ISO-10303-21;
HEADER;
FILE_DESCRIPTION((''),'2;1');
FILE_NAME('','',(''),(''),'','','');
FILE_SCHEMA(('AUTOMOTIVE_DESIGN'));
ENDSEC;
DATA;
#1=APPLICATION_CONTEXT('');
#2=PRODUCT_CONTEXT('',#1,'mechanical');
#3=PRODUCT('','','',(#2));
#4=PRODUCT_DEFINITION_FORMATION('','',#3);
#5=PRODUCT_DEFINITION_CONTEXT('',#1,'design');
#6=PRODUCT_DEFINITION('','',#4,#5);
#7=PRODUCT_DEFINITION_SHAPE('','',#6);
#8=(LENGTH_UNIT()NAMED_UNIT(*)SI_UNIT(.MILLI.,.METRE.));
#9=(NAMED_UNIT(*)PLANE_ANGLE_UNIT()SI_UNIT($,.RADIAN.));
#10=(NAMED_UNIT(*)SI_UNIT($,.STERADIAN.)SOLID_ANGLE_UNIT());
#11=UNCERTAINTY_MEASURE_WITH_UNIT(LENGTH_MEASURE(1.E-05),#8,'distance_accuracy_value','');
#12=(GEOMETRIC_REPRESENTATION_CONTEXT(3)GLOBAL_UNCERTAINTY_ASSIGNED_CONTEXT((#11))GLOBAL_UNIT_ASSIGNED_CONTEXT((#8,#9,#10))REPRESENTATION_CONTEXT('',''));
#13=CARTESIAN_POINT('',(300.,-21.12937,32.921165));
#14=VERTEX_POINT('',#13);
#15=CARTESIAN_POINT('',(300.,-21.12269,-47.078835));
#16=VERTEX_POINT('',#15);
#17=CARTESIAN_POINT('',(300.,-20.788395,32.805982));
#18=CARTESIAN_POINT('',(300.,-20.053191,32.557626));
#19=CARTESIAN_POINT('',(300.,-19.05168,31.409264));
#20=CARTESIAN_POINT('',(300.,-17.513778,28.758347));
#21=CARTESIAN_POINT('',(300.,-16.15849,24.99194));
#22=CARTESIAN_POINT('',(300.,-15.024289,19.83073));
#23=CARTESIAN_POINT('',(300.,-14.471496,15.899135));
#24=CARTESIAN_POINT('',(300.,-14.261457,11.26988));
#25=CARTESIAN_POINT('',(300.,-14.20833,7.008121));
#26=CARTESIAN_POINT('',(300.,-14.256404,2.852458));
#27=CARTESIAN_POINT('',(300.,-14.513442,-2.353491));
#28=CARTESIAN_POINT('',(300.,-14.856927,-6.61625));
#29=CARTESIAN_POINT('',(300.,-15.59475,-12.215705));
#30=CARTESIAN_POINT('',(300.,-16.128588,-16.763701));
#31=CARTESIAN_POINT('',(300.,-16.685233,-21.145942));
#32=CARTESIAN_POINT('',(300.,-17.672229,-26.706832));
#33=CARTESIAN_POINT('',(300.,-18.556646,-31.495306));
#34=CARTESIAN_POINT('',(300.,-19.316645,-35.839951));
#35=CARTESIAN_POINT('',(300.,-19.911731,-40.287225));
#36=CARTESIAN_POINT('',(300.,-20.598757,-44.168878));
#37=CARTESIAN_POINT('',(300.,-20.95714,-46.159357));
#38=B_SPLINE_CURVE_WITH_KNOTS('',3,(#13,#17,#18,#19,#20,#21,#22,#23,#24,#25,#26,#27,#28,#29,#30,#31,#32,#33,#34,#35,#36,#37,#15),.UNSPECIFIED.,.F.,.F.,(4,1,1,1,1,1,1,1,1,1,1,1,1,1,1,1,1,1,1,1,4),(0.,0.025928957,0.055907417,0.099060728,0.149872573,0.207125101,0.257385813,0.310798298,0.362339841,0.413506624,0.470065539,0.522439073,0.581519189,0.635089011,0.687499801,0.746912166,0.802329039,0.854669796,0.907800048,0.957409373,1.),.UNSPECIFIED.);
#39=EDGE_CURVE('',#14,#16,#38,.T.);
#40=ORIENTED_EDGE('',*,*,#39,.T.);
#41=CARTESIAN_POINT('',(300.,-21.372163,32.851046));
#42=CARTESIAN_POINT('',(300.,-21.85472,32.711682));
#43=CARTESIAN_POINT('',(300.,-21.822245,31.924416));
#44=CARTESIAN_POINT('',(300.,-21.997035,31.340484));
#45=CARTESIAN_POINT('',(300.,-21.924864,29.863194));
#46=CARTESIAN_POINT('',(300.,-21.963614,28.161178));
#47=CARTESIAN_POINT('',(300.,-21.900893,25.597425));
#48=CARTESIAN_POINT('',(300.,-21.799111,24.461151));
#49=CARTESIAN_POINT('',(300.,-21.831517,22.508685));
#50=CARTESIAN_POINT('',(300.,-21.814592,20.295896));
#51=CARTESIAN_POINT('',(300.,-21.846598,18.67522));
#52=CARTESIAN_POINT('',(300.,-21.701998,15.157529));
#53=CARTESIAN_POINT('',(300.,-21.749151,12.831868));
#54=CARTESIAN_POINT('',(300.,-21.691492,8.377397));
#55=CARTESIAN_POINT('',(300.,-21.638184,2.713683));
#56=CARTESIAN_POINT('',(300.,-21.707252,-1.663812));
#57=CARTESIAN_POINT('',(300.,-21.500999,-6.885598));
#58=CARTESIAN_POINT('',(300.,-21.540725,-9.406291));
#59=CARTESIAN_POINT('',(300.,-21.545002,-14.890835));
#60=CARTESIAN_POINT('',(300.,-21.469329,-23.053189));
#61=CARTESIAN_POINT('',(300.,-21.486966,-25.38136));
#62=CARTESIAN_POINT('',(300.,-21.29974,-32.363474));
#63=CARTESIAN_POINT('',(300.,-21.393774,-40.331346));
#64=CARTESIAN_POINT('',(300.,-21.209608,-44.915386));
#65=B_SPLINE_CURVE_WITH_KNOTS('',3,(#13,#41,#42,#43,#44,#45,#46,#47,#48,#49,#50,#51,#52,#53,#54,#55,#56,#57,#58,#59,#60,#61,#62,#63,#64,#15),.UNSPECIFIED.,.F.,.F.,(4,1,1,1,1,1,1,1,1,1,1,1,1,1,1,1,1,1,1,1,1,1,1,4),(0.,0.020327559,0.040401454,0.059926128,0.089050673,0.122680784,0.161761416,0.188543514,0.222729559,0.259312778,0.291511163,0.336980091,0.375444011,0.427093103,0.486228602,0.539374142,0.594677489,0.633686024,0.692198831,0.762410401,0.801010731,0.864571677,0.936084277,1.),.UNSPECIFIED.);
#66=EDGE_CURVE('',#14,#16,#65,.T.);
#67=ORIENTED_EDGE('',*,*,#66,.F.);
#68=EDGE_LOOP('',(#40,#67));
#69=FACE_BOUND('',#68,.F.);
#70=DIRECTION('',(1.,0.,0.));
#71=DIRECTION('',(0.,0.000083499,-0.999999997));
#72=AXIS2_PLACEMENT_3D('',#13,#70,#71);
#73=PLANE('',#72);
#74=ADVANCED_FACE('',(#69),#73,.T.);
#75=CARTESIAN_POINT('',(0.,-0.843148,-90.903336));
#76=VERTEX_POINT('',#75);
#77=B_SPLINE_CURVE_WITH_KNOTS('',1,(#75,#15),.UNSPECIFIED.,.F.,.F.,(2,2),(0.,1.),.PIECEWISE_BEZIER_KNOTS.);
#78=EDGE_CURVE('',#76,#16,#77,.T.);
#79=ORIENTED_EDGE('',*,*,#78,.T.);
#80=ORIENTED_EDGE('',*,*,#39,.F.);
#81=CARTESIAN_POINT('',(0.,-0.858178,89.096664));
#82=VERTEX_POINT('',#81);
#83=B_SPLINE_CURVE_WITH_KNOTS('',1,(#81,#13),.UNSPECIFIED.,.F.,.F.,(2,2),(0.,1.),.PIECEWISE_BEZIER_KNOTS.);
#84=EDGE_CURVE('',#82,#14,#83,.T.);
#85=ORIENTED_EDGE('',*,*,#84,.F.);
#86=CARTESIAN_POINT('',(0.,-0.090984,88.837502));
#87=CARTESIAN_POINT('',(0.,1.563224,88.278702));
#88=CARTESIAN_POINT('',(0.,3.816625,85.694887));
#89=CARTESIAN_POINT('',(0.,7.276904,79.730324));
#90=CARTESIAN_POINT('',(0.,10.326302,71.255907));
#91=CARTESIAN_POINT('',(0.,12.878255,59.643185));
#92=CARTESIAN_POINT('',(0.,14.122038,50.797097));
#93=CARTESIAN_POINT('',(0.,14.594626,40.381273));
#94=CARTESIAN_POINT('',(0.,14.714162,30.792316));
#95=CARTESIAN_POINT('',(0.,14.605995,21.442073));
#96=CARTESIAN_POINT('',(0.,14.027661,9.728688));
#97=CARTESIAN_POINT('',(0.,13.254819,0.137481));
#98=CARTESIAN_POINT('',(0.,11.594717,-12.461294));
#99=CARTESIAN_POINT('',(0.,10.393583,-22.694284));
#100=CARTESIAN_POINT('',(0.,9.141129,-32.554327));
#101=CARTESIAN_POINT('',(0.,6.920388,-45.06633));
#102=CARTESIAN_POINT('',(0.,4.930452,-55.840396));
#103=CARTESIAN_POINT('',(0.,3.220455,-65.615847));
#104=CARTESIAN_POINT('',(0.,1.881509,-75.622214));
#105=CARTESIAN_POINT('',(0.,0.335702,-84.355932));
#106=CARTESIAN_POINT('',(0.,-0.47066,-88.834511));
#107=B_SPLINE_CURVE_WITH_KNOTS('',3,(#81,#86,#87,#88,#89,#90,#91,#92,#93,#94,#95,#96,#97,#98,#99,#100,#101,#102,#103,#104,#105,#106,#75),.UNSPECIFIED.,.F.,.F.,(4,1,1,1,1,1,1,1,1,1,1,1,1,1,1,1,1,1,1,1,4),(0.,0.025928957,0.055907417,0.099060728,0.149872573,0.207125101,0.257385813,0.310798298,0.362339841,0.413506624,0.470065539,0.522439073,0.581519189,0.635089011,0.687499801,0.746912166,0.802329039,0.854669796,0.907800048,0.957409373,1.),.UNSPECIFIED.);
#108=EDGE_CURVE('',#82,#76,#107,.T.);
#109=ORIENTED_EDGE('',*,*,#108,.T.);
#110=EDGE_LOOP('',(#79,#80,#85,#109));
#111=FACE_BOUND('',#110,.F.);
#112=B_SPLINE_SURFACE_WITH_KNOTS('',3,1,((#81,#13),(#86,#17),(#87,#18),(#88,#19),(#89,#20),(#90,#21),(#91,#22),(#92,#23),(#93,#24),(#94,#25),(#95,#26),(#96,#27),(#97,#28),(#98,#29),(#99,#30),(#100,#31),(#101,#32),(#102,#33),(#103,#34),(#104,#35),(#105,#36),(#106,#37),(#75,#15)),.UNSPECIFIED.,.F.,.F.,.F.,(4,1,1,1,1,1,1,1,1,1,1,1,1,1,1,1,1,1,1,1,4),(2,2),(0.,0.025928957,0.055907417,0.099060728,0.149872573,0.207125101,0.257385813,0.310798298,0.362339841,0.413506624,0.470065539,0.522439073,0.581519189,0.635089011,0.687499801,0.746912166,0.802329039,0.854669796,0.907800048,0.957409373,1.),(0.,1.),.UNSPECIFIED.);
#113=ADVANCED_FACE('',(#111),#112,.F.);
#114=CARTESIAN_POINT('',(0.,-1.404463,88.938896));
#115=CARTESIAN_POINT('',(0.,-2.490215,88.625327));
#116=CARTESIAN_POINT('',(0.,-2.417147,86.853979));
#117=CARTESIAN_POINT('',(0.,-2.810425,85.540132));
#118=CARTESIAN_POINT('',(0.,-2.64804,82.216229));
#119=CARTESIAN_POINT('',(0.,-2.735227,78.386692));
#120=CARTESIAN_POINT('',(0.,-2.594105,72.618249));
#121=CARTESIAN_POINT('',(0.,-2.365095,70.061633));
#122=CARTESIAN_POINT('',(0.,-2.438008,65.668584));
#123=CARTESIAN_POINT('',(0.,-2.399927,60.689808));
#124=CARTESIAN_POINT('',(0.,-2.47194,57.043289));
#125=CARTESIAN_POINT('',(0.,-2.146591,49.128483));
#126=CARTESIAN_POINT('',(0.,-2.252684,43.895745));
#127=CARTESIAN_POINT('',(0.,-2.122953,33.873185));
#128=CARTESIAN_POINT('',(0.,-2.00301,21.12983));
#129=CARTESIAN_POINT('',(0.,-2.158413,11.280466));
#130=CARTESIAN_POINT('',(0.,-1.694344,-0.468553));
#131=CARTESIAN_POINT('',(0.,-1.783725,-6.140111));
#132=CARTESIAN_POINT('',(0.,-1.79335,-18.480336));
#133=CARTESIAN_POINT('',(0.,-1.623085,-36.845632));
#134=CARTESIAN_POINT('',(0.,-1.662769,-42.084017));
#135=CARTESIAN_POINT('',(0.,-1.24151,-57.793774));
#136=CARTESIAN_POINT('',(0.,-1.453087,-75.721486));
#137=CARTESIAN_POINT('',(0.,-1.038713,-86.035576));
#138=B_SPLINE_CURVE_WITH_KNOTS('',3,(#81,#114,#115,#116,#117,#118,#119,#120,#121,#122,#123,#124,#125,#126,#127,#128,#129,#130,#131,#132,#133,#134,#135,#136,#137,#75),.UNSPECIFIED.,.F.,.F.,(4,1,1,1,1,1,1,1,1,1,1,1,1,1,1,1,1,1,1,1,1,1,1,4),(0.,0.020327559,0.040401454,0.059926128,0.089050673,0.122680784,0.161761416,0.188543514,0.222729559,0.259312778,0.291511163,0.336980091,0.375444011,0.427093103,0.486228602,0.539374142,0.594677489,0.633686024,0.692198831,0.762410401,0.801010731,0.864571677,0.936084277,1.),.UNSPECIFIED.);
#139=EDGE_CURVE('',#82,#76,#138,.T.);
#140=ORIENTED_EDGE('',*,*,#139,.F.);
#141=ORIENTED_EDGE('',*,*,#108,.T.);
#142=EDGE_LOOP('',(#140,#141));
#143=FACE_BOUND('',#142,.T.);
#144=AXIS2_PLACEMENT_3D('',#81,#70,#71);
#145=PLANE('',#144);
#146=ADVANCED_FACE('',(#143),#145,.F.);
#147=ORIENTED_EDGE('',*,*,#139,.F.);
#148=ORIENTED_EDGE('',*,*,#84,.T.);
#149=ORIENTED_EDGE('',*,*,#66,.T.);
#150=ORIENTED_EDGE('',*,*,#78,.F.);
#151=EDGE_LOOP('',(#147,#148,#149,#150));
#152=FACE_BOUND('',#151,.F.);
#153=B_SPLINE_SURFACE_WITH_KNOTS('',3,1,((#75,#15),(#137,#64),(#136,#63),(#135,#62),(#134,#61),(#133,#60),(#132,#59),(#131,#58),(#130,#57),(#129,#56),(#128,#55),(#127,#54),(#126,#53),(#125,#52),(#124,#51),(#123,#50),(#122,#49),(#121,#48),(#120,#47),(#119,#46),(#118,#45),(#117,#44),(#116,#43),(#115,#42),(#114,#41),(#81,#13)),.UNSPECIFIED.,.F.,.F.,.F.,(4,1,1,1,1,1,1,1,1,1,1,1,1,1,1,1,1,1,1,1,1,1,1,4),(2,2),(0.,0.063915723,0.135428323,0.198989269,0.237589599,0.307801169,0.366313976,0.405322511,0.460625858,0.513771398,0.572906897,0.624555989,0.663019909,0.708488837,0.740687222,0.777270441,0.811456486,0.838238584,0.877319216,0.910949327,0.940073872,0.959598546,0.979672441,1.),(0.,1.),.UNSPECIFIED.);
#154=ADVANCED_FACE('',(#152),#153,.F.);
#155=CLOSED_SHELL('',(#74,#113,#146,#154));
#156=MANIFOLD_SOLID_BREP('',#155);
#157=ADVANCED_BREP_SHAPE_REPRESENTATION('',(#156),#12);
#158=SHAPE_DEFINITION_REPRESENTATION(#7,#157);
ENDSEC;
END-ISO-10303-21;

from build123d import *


with BuildPart() as f3:
    # F0 (on Right) → F3 section 0
    with BuildSketch(Plane.YZ):
        with BuildLine():
            add(Edge.make_bspline(
                [(-0.8581783067, 89.0966641903), (-0.0909835006, 88.8375018392), (1.563224164, 88.2787019828), (3.8166245117, 85.6948868237), (7.2769036033, 79.7303238844), (10.3263017721, 71.2559073926), (12.8782546304, 59.6431852965), (14.1220379816, 50.7970965092), (14.5946259905, 40.3812733772), (14.7141619457, 30.792316012), (14.6059947167, 21.4420727085), (14.0276612179, 9.7286883375), (13.2548192102, 0.1374811079), (11.5947174142, -12.4612944717), (10.3935827762, -22.6942842365), (9.1411293748, -32.5543273378), (6.9203884123, -45.066329976), (4.9304517493, -55.8403956919), (3.2204545525, -65.6158467378), (1.8815091078, -75.622213963), (0.3357020939, -84.3559320968), (-0.4706596158, -88.8345114632), (-0.8431484343, -90.9033358097)],
                knots=[0, 0, 0, 0, 0.0259289572, 0.0559074168, 0.0990607278, 0.1498725735, 0.2071251008, 0.2573858131, 0.3107982977, 0.3623398407, 0.4135066245, 0.4700655391, 0.5224390727, 0.581519189, 0.635089011, 0.6874998006, 0.7469121662, 0.8023290394, 0.8546697959, 0.9078000483, 0.9574093727, 1, 1, 1, 1], degree=3))
            add(Edge.make_bspline(
                [(-0.8581783067, 89.0966641903), (-1.404462943, 88.938895504), (-2.4902152414, 88.6253268945), (-2.4171470838, 86.853978738), (-2.8104245698, 85.5401321657), (-2.6480397884, 82.2162290738), (-2.7352274213, 78.3866922604), (-2.594105356, 72.6182494274), (-2.3650949946, 70.0616330556), (-2.4380078188, 65.6685838696), (-2.3999265509, 60.6898081314), (-2.4719402279, 57.0432888195), (-2.1465914902, 49.1284832057), (-2.2526839686, 43.8957450986), (-2.1229527861, 33.8731852803), (-2.0030100309, 21.1298302522), (-2.1584125605, 11.280466173), (-1.6943435842, -0.468552789), (-1.7837254863, -6.1401111108), (-1.7933498326, -18.4803362465), (-1.6230847275, -36.8456317984), (-1.6627691908, -42.0840169933), (-1.2415097852, -57.7937735112), (-1.4530871043, -75.7214856707), (-1.0387131964, -86.0355760548), (-0.8431484343, -90.9033358097)],
                knots=[0, 0, 0, 0, 0.0203275586, 0.0404014537, 0.0599261282, 0.0890506729, 0.1226807844, 0.1617614156, 0.1885435138, 0.2227295591, 0.2593127782, 0.2915111627, 0.3369800906, 0.3754440114, 0.4270931032, 0.4862286015, 0.5393741421, 0.594677489, 0.6336860238, 0.6921988306, 0.7624104014, 0.8010107314, 0.8645716771, 0.9360842774, 1, 1, 1, 1], degree=3))
        make_face()
    # F2 (on offset) → F3 section 1
    with BuildSketch(Plane.YZ.offset(300)):
        with BuildLine():
            add(Edge.make_bspline(
                [(-21.129370218, 32.9211650841), (-20.7883947487, 32.8059818169), (-20.0531913422, 32.5576263252), (-19.0516800765, 31.4092640322), (-17.5137782581, 28.7583471703), (-16.158490183, 24.9919398406), (-15.0242889127, 19.8307300201), (-14.4714963121, 15.8991350036), (-14.261457197, 11.2698802782), (-14.2083301059, 7.0081214492), (-14.2564044299, 2.8524577588), (-14.5134415405, -2.3534908505), (-14.8569268772, -6.6162496192), (-15.5947498977, -12.2157054324), (-16.1285875145, -16.7637008834), (-16.6852334707, -21.1459422618), (-17.6722294541, -26.7068323232), (-18.5566457487, -31.4953059747), (-19.3166445028, -35.839950884), (-19.9117313672, -40.2872252063), (-20.5987567067, -44.1688777102), (-20.9571396887, -46.1593574286), (-21.1226902748, -47.0788349159)],
                knots=[0, 0, 0, 0, 0.0259289572, 0.0559074168, 0.0990607278, 0.1498725735, 0.2071251008, 0.2573858131, 0.3107982977, 0.3623398407, 0.4135066245, 0.4700655391, 0.5224390727, 0.581519189, 0.635089011, 0.6874998006, 0.7469121662, 0.8023290394, 0.8546697959, 0.9078000483, 0.9574093727, 1, 1, 1, 1], degree=3))
            add(Edge.make_bspline(
                [(-21.129370218, 32.9211650841), (-21.3721633897, 32.8510456679), (-21.8547199668, 32.7116818415), (-21.8222452301, 31.9244159942), (-21.9970352238, 31.3404841842), (-21.9248642099, 29.8631939212), (-21.963614269, 28.1611775597), (-21.9008933511, 25.5974251895), (-21.7991109682, 24.4611512464), (-21.8315166679, 22.5086849415), (-21.8145916599, 20.2958957245), (-21.8465977386, 18.6752204748), (-21.7019982996, 15.1575290909), (-21.7491505122, 12.8318677099), (-21.6914922089, 8.3773966796), (-21.6381843177, 2.7136833338), (-21.7072521086, -1.6638118125), (-21.5009992302, -6.8855980178), (-21.5407245201, -9.4062906053), (-21.5450020073, -14.8908351101), (-21.4693286273, -23.0531886887), (-21.4869661665, -25.3813598864), (-21.2997397641, -32.3634738944), (-21.3937741281, -40.3313459653), (-21.2096079468, -44.915386136), (-21.1226902748, -47.0788349159)],
                knots=[0, 0, 0, 0, 0.0203275586, 0.0404014537, 0.0599261282, 0.0890506729, 0.1226807844, 0.1617614156, 0.1885435138, 0.2227295591, 0.2593127782, 0.2915111627, 0.3369800906, 0.3754440114, 0.4270931032, 0.4862286015, 0.5393741421, 0.594677489, 0.6336860238, 0.6921988306, 0.7624104014, 0.8010107314, 0.8645716771, 0.9360842774, 1, 1, 1, 1], degree=3))
        make_face()
    loft()


solid = f3.part
